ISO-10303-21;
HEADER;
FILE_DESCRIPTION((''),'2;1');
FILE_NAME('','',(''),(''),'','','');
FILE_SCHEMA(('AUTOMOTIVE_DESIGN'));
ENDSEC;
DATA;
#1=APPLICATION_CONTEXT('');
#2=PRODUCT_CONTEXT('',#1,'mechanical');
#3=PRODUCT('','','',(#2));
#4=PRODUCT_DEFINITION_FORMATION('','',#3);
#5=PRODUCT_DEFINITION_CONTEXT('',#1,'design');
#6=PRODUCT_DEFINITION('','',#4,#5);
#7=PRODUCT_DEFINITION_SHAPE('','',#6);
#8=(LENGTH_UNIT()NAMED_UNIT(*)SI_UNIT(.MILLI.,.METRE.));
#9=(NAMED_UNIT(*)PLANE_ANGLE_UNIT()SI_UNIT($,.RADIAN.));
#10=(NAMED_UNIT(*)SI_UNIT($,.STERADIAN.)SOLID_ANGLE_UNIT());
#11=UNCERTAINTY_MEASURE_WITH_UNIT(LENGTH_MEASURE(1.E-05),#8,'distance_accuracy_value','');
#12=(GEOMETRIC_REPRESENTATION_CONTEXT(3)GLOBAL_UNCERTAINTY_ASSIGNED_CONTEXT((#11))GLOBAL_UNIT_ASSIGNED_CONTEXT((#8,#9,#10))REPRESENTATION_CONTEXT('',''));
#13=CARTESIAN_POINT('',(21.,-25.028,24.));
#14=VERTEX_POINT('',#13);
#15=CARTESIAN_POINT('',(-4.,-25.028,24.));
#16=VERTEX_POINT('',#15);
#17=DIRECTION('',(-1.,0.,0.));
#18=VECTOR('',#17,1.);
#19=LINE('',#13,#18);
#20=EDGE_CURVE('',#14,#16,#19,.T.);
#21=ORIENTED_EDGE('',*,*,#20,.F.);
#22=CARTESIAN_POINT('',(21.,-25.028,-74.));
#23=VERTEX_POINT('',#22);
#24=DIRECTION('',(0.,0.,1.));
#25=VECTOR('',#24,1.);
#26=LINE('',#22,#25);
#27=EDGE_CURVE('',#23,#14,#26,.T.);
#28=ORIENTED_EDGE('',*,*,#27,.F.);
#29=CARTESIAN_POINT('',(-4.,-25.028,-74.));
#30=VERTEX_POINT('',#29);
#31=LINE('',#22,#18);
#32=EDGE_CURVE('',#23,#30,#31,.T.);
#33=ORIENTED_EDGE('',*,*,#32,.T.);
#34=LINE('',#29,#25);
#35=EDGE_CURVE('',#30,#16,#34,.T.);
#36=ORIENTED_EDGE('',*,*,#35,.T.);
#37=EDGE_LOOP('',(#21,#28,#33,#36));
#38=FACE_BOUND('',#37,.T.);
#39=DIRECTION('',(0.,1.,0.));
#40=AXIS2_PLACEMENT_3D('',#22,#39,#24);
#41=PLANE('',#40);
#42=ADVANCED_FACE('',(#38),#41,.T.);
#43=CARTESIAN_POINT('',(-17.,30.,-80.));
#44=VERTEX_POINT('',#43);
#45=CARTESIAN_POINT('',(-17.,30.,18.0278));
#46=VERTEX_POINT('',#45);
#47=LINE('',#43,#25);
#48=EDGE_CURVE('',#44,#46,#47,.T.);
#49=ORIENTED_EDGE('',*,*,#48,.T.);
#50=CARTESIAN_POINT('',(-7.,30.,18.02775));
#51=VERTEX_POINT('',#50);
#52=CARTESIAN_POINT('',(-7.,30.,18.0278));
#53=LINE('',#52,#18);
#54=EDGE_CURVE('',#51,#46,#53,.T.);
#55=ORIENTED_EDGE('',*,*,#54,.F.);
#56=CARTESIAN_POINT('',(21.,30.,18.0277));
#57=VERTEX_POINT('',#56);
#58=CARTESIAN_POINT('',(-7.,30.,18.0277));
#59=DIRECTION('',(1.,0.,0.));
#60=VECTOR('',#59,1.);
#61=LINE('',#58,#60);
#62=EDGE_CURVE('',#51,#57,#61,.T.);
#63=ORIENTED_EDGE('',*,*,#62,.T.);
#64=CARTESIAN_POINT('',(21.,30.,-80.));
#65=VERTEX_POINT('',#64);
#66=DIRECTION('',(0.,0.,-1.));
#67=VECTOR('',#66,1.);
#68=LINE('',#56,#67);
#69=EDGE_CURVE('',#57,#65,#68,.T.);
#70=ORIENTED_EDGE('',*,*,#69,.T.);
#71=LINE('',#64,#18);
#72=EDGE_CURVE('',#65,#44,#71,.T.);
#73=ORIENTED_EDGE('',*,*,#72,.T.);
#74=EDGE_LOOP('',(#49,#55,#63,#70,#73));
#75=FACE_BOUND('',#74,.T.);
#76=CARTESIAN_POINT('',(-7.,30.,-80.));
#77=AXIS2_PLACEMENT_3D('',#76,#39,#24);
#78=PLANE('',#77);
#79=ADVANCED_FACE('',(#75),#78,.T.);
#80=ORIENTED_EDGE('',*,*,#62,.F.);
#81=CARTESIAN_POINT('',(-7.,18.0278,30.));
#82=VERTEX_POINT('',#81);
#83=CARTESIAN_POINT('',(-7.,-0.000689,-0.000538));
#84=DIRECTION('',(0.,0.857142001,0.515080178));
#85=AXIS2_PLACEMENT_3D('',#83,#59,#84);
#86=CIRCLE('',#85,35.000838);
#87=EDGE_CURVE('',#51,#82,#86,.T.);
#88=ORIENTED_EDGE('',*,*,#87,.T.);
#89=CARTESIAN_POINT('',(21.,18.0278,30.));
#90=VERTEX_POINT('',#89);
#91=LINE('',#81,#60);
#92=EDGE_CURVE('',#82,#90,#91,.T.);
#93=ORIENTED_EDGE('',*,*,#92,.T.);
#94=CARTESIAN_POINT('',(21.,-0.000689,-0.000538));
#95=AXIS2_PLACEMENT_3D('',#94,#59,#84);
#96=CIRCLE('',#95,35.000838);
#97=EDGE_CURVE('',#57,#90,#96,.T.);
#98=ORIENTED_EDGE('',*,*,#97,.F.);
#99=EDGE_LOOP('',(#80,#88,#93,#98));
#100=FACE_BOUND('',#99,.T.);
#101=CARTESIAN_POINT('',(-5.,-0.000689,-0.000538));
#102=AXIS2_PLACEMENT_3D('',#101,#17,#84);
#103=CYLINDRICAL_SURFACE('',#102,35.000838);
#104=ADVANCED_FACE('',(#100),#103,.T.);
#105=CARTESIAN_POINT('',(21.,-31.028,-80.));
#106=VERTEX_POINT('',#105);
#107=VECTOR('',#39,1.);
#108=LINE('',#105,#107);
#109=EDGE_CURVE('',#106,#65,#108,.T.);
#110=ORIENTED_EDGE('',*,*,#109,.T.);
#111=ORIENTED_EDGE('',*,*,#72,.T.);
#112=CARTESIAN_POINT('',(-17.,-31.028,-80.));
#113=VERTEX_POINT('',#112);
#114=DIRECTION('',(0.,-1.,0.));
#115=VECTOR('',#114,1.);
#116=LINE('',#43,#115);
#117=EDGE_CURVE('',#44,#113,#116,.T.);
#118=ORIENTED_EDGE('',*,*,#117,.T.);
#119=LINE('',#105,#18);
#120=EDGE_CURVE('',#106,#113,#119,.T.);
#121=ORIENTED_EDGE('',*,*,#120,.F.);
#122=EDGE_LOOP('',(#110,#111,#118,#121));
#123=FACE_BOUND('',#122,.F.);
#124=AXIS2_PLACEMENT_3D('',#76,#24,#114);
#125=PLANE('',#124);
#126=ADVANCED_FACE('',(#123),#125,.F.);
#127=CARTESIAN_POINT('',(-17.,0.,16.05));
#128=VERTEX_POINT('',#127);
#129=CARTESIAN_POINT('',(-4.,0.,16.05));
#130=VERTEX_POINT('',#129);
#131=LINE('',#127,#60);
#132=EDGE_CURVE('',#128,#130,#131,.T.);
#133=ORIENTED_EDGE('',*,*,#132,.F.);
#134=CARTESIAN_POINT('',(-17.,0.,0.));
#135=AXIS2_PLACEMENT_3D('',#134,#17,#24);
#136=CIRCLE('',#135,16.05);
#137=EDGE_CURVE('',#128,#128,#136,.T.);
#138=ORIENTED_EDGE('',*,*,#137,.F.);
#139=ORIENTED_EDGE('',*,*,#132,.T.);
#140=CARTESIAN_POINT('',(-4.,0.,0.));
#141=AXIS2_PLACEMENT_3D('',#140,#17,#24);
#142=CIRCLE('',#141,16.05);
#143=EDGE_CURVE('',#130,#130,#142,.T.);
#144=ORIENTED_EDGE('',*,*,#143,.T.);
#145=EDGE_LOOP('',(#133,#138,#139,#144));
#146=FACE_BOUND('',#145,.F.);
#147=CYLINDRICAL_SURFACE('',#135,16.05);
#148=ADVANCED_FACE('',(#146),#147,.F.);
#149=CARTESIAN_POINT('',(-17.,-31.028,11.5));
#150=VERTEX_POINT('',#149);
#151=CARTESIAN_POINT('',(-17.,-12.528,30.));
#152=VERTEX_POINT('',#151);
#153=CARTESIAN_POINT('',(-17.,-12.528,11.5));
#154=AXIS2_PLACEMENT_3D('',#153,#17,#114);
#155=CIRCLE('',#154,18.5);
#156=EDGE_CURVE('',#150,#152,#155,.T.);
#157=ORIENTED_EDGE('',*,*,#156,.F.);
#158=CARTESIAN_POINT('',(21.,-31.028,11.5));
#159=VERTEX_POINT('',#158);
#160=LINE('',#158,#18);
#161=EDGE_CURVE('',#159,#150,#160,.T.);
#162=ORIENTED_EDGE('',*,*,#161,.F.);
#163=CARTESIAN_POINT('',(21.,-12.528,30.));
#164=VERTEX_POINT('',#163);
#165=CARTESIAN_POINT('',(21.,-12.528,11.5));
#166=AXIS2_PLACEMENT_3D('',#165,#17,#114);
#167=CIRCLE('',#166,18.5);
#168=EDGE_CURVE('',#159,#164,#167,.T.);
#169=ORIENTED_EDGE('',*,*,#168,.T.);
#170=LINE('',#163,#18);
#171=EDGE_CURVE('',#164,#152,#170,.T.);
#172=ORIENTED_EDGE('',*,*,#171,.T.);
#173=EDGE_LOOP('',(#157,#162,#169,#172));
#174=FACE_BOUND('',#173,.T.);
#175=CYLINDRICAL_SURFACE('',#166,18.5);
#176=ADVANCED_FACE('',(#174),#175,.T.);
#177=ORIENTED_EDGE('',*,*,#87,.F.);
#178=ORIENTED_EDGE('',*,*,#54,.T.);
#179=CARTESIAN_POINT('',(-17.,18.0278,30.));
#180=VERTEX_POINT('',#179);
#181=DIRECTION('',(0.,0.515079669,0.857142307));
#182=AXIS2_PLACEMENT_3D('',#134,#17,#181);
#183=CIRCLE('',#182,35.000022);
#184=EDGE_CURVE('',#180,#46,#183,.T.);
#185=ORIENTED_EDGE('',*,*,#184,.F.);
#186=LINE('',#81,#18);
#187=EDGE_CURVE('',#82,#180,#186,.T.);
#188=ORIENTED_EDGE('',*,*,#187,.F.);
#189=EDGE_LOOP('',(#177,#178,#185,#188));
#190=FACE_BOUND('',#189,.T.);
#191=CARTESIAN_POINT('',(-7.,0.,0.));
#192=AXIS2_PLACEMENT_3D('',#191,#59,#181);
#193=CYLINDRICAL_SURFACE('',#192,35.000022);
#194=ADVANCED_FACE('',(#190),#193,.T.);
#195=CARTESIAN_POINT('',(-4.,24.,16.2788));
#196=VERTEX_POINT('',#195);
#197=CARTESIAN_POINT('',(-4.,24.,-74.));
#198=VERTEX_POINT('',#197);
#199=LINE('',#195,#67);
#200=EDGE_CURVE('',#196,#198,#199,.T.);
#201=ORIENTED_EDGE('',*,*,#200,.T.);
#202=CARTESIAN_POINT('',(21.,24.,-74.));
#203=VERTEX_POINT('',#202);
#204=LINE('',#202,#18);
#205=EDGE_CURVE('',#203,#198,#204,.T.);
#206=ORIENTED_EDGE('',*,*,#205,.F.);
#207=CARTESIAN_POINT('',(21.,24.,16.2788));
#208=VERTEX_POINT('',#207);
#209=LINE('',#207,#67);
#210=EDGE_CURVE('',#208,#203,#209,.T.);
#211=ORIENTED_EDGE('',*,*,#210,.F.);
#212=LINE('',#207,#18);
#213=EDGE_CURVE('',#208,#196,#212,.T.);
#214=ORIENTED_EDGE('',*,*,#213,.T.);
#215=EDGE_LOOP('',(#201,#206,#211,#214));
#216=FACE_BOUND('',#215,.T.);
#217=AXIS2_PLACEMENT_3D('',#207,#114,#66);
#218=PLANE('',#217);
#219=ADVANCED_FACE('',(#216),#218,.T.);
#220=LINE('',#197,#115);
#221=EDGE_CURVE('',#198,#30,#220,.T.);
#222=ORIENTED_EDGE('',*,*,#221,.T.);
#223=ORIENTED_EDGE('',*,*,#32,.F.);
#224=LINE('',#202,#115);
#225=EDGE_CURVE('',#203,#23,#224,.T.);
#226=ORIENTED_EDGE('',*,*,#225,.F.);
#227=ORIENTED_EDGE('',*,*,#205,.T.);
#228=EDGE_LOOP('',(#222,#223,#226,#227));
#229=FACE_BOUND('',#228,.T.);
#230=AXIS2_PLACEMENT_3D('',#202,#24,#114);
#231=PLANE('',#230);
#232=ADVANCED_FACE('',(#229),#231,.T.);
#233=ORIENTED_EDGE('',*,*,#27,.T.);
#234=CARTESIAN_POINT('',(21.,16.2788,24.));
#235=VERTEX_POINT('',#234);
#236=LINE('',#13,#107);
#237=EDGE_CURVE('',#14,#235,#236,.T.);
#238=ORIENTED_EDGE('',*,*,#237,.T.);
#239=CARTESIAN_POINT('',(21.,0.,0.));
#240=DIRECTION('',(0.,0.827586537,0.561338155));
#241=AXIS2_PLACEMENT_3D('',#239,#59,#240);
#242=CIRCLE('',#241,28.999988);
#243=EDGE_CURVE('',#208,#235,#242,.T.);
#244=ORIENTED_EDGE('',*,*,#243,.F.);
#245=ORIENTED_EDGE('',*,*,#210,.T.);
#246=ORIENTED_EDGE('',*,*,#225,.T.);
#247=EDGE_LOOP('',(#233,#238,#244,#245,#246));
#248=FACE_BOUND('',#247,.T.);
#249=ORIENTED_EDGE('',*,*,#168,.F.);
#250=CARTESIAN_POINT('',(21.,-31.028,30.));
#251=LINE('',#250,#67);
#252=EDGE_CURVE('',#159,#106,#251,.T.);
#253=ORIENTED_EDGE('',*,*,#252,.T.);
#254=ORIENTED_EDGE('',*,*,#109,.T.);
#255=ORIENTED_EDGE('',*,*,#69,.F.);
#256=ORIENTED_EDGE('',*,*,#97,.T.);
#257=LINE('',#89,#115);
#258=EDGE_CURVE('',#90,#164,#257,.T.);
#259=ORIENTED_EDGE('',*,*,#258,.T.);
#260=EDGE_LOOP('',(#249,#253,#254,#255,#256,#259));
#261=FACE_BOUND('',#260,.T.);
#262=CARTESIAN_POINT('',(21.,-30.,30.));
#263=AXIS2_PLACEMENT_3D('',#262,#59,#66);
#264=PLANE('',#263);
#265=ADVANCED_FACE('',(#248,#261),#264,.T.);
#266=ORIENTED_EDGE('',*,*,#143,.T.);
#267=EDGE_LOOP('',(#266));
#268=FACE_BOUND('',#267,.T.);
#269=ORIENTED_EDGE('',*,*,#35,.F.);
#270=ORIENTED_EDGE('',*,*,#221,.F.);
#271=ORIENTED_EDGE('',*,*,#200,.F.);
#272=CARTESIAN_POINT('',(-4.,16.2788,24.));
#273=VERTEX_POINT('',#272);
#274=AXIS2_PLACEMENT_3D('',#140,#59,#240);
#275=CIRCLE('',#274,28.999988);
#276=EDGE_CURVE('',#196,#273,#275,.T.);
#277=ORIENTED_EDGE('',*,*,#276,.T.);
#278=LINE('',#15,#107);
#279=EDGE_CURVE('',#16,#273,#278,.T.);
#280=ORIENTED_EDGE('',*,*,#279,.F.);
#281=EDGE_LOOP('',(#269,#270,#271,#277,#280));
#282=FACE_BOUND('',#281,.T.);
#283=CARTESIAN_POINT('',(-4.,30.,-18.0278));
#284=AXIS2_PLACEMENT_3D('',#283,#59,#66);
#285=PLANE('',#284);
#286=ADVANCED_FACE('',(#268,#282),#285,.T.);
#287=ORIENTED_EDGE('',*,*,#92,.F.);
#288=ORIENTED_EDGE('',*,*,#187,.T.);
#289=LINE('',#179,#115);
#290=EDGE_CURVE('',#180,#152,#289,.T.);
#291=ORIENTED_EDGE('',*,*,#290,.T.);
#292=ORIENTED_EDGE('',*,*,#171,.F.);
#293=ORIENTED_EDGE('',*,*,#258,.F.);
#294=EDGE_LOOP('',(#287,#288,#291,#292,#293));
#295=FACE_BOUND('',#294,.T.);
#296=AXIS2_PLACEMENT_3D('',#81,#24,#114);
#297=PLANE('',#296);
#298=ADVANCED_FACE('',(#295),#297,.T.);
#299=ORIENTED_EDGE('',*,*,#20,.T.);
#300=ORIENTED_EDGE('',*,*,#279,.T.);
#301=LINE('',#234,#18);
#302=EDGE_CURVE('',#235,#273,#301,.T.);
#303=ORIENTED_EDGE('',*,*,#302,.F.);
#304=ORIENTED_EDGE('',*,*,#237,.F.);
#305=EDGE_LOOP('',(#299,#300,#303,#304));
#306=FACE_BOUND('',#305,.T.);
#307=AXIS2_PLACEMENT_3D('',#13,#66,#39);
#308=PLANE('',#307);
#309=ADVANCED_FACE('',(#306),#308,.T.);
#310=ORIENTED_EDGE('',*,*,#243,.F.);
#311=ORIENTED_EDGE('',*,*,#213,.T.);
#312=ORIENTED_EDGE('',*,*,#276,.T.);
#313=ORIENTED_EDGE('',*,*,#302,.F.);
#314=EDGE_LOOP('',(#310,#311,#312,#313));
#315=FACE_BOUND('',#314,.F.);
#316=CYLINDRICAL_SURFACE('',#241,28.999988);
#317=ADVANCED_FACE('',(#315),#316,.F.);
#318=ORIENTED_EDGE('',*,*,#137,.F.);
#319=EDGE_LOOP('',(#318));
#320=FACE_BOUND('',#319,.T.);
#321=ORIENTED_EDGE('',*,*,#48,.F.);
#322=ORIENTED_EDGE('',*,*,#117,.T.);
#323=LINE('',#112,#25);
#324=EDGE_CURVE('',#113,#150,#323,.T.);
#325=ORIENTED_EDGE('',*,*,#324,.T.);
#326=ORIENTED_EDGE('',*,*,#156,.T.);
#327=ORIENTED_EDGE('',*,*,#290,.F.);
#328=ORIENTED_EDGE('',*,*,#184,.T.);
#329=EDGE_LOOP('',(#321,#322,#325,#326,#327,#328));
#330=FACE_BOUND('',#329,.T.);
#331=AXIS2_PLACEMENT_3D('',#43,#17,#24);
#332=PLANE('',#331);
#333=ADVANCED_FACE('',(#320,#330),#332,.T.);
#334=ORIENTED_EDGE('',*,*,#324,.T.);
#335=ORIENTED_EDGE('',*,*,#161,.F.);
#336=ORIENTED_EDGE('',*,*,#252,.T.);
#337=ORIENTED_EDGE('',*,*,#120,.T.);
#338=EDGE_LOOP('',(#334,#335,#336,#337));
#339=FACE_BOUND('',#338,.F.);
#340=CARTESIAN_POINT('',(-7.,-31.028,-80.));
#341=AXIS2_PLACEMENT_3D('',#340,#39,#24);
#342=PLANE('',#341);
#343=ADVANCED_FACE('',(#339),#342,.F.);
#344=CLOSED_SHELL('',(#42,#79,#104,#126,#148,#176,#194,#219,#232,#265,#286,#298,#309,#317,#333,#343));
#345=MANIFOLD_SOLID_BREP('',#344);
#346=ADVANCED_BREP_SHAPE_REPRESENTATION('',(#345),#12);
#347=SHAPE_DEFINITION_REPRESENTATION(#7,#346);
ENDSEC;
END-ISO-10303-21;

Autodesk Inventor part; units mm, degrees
ref_plane "YZ Plane" through (0, 0, 0) normal (1, 0, 0) x (0, 1, 0)
ref_plane "XZ Plane" through (0, 0, 0) normal (0, 1, 0) x (-1, 0, 0)
ref_plane "Work Plane1" through (-5, 30, -18.0278) normal (1, 0, 0) x (0, 0, 1)
sketch "Sketch2" plane through (-5, 30, -18.0278) normal (1, 0, 0) x (0, 0, 1)
  arc A0 (36.0555, 0) -> (48.0278, 11.9722) centre (18.0278, 30) ccw projected
  line L0 (48.0278, 11.9722) -> (48.0278, 48.0278) projected
  arc A1 (36.0555, 0) -> (48.0278, 11.9722) centre (18.0278, 30) ccw
  line L1 (48.0278, 48.0278) -> (48.0278, 11.9722)
  arc A2 (48.0278, 48.0278) -> (36.0555, 60) centre (18.0278, 30) ccw projected
  line L2 (48.0278, 48.0278) -> (48.0278, 60)
  line L3 (48.0278, 60) -> (-61.9722, 60)
  line L4 (-61.9722, 60) -> (-61.9722, 0)
  line L5 (0, 0) -> (36.0555, 0) projected
  line L6 (-61.9722, 0) -> (0, 0)
  line L7 (0, 0) -> (36.0555, 0)
extrude "Extrusion1" add sketch "Sketch2" along normal blind 26 and the other way blind 2
sketch "Sketch4" plane through (-7, -30, -80) normal (0, -1, 0) x (1, 0, 0)
  line L0 (28, 110) -> (28, 0) projected
  line L1 (0, 0) -> (0, 110) projected
  line L2 (28, 110) -> (0, 110)
  line L3 (0, 110) -> (0, 0)
  line L4 (0, 0) -> (28, 0)
  line L5 (28, 0) -> (28, 110)
  point P0 (7, 80)
extrude "Extrusion3" add sketch "Sketch4" along normal blind 1.028
sketch "Sketch5" plane through (21, 30, -18.0278) normal (1, 0, 0) x (0, 0, -1)
  arc A0 (-36.0555, 0) -> (-48.0278, -11.9722) centre (-18.0278, -30) ccw projected
  line L0 (-48.0278, -11.9722) -> (-48.0278, -61.028) projected
  line L1 (-48.0278, -11.9722) -> (-48.0278, -61.028)
  line L2 (61.9722, 0) -> (61.9722, -61.028) projected
  line L3 (-48.0278, -61.028) -> (61.9722, -61.028)
  line L4 (61.9722, -61.028) -> (61.9722, 0)
  line L5 (-36.0555, 0) -> (61.9722, 0) projected
  line L6 (61.9722, 0) -> (-36.0555, 0)
  arc A1 (-36.0555, 0) -> (-48.0278, -11.9722) centre (-18.0278, -30) ccw
  line L7 (55.9722, -55.028) -> (-42.0278, -55.028)
  line L8 (-42.0278, -55.028) -> (-42.0278, -13.7212)
  arc A2 (-34.3066, -6) -> (-42.0278, -13.7212) centre (-18.0278, -30) ccw
  line L9 (-34.3066, -6) -> (55.9722, -6)
  line L10 (55.9722, -6) -> (55.9722, -55.028)
  dimension "d11" = 6
extrude "Extrusion4" cut sketch "Sketch5" against normal blind 25 contours L7 L8 A2 L9 L10
sketch "Sketch6" plane through (-7, 30, -80) normal (-1, 0, 0) x (0, 0, 1)
  line L0 (0, 0) -> (98.0278, 0) projected
  line L1 (0, 0) -> (98.0278, 0)
  line L2 (0, -61.028) -> (110, -61.028) projected
  line L3 (110, -11.9722) -> (110, -61.028)
  line L4 (110, -61.028) -> (0, -61.028)
  line L5 (0, 0) -> (0, -61.028) projected
  line L6 (0, -61.028) -> (0, 0)
  line L7 (110, -11.9722) -> (110, -61.028) projected
  arc A0 (110, -11.9722) -> (98.0278, 0) centre (80, -30) ccw
  point P0 (80, -30)
extrude "Extrusion5" add sketch "Sketch6" along normal blind 10
sketch "Sketch7" plane through (-17, 30, -80) normal (-1, 0, 0) x (0, 0, 1)
  circle A0 centre (80, -30) radius 16.05
  dimension "d16" = 32.1
extrude "Extrusion6" cut sketch "Sketch7" against normal blind 13
fillet "Fillet1" radius 18.5 1 edges at (2, -31.028, 30)
properties part number "Tilt_Lid"
